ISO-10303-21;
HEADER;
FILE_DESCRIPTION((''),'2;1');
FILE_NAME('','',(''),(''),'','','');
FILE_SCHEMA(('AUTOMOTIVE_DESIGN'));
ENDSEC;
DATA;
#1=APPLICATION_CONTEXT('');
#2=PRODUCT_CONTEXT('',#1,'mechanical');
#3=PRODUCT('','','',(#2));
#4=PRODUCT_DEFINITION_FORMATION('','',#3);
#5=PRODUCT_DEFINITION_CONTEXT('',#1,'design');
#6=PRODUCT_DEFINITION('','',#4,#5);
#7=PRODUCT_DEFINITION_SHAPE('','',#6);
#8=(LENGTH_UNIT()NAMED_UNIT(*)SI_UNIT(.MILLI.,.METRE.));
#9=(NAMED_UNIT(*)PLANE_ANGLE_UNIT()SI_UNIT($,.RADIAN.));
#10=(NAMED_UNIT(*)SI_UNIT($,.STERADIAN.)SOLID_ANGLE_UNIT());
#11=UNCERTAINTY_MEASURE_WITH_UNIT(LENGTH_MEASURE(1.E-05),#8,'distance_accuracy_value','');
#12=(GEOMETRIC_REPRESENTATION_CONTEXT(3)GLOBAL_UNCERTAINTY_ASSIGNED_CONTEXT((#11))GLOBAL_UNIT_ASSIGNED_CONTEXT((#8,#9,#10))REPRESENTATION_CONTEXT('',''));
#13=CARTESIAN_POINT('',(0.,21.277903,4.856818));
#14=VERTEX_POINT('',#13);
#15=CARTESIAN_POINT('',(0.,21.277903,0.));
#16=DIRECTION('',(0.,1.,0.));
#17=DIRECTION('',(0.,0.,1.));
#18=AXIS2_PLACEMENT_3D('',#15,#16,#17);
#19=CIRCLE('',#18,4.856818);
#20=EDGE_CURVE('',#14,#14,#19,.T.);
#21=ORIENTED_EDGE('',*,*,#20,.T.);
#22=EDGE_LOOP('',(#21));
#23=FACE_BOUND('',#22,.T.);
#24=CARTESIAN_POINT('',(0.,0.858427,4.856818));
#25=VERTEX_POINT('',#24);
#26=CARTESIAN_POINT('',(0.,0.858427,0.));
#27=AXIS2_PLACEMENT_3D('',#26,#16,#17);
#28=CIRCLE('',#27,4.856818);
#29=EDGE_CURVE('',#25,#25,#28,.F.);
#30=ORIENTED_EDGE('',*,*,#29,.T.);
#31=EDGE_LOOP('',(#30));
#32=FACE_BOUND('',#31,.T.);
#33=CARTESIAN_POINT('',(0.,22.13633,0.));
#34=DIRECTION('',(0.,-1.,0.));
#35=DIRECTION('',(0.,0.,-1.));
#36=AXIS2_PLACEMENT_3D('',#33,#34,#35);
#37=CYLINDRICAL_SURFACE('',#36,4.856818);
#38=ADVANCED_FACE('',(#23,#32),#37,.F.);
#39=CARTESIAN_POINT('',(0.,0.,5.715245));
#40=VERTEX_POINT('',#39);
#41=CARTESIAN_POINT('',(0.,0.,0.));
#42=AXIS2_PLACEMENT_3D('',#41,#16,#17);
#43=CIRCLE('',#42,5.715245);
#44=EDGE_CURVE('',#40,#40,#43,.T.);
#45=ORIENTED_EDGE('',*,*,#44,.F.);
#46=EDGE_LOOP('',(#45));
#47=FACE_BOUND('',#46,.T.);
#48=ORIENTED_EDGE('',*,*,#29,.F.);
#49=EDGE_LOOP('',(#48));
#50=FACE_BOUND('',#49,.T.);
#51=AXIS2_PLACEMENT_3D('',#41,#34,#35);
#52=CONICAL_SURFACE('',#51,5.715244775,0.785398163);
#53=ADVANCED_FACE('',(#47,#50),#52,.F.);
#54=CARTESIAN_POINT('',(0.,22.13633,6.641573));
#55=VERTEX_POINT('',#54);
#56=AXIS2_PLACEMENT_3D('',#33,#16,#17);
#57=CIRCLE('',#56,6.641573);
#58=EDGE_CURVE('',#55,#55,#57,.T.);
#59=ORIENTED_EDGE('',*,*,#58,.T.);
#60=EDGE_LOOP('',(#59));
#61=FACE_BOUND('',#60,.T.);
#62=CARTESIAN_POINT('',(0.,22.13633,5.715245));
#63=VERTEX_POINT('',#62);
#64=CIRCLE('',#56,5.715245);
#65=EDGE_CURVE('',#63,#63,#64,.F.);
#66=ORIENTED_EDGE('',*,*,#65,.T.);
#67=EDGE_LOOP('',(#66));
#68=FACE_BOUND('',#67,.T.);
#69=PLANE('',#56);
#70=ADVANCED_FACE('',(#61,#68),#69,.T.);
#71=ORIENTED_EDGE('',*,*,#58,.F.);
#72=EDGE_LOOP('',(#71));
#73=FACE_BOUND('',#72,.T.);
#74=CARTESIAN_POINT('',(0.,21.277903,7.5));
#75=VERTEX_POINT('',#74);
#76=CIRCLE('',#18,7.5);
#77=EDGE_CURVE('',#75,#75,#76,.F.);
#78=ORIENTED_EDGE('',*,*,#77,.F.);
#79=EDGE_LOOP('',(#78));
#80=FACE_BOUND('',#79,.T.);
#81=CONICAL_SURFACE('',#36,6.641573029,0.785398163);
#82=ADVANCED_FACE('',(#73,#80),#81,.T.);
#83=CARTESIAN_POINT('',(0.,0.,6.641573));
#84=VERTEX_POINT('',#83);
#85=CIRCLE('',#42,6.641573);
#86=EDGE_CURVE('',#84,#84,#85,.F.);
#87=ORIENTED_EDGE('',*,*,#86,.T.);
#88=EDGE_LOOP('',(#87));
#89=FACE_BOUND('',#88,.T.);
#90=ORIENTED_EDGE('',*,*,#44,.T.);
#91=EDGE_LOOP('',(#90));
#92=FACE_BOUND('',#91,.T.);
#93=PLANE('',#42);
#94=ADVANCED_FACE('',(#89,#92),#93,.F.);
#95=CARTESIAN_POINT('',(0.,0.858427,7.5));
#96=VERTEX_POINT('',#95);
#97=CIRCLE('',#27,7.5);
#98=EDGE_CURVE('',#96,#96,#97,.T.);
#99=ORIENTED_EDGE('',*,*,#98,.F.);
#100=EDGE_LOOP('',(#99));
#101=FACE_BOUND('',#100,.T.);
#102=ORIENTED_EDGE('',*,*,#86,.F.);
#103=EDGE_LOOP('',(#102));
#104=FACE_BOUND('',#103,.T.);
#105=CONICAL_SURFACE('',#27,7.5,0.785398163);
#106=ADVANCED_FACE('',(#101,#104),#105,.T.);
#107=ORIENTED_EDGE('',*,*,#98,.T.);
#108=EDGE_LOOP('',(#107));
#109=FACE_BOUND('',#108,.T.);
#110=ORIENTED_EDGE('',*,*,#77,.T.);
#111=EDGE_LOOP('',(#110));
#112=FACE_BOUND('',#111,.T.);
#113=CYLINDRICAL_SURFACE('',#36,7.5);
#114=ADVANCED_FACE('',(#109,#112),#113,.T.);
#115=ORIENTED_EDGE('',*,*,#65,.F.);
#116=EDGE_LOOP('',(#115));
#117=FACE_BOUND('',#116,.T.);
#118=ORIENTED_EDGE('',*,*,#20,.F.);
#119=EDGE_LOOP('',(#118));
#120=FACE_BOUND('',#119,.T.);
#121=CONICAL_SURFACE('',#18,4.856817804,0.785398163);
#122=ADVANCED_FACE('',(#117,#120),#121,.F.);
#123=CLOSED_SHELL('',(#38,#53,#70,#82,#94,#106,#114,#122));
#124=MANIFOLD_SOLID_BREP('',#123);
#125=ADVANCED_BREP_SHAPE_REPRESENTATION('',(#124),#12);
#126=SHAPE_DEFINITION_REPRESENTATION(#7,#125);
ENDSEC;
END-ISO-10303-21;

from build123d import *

# Parameters (mm, degrees)
SKETCH1_R           = 7.5
BOSS_EXTRUDE1_DEPTH = 22.136329724
SKETCH2_R           = 4.856817804
CUT_EXTRUDE1_DEPTH  = 25.546223613
CHAMFER1_SIZE       = 0.858426971


with BuildPart() as part:
    # Sketch1 → Boss-Extrude1 (new body)
    with BuildSketch(Plane(origin=(0, 0, 0), x_dir=(1, 0, 0), z_dir=(0, 1, 0))):
        Circle(SKETCH1_R)
    extrude(amount=BOSS_EXTRUDE1_DEPTH)

    # Sketch2 → Cut-Extrude1 (cut, through all)
    with BuildSketch(Plane(origin=(0, 0, 0), x_dir=(1, 0, 0), z_dir=(0, 1, 0))):
        Circle(SKETCH2_R)
    extrude(amount=CUT_EXTRUDE1_DEPTH, mode=Mode.SUBTRACT)

    # Chamfer1
    chamfer1_edges = [part.edges().sort_by_distance(p)[0] for p in [
        (-4.856817804, 22.136329724, 0),
        (-4.856817804, 0, 0),
        (-7.5, 0, 0),
        (-7.5, 22.136329724, 0),
    ]]
    chamfer(chamfer1_edges, length=CHAMFER1_SIZE)


solid = part.part
